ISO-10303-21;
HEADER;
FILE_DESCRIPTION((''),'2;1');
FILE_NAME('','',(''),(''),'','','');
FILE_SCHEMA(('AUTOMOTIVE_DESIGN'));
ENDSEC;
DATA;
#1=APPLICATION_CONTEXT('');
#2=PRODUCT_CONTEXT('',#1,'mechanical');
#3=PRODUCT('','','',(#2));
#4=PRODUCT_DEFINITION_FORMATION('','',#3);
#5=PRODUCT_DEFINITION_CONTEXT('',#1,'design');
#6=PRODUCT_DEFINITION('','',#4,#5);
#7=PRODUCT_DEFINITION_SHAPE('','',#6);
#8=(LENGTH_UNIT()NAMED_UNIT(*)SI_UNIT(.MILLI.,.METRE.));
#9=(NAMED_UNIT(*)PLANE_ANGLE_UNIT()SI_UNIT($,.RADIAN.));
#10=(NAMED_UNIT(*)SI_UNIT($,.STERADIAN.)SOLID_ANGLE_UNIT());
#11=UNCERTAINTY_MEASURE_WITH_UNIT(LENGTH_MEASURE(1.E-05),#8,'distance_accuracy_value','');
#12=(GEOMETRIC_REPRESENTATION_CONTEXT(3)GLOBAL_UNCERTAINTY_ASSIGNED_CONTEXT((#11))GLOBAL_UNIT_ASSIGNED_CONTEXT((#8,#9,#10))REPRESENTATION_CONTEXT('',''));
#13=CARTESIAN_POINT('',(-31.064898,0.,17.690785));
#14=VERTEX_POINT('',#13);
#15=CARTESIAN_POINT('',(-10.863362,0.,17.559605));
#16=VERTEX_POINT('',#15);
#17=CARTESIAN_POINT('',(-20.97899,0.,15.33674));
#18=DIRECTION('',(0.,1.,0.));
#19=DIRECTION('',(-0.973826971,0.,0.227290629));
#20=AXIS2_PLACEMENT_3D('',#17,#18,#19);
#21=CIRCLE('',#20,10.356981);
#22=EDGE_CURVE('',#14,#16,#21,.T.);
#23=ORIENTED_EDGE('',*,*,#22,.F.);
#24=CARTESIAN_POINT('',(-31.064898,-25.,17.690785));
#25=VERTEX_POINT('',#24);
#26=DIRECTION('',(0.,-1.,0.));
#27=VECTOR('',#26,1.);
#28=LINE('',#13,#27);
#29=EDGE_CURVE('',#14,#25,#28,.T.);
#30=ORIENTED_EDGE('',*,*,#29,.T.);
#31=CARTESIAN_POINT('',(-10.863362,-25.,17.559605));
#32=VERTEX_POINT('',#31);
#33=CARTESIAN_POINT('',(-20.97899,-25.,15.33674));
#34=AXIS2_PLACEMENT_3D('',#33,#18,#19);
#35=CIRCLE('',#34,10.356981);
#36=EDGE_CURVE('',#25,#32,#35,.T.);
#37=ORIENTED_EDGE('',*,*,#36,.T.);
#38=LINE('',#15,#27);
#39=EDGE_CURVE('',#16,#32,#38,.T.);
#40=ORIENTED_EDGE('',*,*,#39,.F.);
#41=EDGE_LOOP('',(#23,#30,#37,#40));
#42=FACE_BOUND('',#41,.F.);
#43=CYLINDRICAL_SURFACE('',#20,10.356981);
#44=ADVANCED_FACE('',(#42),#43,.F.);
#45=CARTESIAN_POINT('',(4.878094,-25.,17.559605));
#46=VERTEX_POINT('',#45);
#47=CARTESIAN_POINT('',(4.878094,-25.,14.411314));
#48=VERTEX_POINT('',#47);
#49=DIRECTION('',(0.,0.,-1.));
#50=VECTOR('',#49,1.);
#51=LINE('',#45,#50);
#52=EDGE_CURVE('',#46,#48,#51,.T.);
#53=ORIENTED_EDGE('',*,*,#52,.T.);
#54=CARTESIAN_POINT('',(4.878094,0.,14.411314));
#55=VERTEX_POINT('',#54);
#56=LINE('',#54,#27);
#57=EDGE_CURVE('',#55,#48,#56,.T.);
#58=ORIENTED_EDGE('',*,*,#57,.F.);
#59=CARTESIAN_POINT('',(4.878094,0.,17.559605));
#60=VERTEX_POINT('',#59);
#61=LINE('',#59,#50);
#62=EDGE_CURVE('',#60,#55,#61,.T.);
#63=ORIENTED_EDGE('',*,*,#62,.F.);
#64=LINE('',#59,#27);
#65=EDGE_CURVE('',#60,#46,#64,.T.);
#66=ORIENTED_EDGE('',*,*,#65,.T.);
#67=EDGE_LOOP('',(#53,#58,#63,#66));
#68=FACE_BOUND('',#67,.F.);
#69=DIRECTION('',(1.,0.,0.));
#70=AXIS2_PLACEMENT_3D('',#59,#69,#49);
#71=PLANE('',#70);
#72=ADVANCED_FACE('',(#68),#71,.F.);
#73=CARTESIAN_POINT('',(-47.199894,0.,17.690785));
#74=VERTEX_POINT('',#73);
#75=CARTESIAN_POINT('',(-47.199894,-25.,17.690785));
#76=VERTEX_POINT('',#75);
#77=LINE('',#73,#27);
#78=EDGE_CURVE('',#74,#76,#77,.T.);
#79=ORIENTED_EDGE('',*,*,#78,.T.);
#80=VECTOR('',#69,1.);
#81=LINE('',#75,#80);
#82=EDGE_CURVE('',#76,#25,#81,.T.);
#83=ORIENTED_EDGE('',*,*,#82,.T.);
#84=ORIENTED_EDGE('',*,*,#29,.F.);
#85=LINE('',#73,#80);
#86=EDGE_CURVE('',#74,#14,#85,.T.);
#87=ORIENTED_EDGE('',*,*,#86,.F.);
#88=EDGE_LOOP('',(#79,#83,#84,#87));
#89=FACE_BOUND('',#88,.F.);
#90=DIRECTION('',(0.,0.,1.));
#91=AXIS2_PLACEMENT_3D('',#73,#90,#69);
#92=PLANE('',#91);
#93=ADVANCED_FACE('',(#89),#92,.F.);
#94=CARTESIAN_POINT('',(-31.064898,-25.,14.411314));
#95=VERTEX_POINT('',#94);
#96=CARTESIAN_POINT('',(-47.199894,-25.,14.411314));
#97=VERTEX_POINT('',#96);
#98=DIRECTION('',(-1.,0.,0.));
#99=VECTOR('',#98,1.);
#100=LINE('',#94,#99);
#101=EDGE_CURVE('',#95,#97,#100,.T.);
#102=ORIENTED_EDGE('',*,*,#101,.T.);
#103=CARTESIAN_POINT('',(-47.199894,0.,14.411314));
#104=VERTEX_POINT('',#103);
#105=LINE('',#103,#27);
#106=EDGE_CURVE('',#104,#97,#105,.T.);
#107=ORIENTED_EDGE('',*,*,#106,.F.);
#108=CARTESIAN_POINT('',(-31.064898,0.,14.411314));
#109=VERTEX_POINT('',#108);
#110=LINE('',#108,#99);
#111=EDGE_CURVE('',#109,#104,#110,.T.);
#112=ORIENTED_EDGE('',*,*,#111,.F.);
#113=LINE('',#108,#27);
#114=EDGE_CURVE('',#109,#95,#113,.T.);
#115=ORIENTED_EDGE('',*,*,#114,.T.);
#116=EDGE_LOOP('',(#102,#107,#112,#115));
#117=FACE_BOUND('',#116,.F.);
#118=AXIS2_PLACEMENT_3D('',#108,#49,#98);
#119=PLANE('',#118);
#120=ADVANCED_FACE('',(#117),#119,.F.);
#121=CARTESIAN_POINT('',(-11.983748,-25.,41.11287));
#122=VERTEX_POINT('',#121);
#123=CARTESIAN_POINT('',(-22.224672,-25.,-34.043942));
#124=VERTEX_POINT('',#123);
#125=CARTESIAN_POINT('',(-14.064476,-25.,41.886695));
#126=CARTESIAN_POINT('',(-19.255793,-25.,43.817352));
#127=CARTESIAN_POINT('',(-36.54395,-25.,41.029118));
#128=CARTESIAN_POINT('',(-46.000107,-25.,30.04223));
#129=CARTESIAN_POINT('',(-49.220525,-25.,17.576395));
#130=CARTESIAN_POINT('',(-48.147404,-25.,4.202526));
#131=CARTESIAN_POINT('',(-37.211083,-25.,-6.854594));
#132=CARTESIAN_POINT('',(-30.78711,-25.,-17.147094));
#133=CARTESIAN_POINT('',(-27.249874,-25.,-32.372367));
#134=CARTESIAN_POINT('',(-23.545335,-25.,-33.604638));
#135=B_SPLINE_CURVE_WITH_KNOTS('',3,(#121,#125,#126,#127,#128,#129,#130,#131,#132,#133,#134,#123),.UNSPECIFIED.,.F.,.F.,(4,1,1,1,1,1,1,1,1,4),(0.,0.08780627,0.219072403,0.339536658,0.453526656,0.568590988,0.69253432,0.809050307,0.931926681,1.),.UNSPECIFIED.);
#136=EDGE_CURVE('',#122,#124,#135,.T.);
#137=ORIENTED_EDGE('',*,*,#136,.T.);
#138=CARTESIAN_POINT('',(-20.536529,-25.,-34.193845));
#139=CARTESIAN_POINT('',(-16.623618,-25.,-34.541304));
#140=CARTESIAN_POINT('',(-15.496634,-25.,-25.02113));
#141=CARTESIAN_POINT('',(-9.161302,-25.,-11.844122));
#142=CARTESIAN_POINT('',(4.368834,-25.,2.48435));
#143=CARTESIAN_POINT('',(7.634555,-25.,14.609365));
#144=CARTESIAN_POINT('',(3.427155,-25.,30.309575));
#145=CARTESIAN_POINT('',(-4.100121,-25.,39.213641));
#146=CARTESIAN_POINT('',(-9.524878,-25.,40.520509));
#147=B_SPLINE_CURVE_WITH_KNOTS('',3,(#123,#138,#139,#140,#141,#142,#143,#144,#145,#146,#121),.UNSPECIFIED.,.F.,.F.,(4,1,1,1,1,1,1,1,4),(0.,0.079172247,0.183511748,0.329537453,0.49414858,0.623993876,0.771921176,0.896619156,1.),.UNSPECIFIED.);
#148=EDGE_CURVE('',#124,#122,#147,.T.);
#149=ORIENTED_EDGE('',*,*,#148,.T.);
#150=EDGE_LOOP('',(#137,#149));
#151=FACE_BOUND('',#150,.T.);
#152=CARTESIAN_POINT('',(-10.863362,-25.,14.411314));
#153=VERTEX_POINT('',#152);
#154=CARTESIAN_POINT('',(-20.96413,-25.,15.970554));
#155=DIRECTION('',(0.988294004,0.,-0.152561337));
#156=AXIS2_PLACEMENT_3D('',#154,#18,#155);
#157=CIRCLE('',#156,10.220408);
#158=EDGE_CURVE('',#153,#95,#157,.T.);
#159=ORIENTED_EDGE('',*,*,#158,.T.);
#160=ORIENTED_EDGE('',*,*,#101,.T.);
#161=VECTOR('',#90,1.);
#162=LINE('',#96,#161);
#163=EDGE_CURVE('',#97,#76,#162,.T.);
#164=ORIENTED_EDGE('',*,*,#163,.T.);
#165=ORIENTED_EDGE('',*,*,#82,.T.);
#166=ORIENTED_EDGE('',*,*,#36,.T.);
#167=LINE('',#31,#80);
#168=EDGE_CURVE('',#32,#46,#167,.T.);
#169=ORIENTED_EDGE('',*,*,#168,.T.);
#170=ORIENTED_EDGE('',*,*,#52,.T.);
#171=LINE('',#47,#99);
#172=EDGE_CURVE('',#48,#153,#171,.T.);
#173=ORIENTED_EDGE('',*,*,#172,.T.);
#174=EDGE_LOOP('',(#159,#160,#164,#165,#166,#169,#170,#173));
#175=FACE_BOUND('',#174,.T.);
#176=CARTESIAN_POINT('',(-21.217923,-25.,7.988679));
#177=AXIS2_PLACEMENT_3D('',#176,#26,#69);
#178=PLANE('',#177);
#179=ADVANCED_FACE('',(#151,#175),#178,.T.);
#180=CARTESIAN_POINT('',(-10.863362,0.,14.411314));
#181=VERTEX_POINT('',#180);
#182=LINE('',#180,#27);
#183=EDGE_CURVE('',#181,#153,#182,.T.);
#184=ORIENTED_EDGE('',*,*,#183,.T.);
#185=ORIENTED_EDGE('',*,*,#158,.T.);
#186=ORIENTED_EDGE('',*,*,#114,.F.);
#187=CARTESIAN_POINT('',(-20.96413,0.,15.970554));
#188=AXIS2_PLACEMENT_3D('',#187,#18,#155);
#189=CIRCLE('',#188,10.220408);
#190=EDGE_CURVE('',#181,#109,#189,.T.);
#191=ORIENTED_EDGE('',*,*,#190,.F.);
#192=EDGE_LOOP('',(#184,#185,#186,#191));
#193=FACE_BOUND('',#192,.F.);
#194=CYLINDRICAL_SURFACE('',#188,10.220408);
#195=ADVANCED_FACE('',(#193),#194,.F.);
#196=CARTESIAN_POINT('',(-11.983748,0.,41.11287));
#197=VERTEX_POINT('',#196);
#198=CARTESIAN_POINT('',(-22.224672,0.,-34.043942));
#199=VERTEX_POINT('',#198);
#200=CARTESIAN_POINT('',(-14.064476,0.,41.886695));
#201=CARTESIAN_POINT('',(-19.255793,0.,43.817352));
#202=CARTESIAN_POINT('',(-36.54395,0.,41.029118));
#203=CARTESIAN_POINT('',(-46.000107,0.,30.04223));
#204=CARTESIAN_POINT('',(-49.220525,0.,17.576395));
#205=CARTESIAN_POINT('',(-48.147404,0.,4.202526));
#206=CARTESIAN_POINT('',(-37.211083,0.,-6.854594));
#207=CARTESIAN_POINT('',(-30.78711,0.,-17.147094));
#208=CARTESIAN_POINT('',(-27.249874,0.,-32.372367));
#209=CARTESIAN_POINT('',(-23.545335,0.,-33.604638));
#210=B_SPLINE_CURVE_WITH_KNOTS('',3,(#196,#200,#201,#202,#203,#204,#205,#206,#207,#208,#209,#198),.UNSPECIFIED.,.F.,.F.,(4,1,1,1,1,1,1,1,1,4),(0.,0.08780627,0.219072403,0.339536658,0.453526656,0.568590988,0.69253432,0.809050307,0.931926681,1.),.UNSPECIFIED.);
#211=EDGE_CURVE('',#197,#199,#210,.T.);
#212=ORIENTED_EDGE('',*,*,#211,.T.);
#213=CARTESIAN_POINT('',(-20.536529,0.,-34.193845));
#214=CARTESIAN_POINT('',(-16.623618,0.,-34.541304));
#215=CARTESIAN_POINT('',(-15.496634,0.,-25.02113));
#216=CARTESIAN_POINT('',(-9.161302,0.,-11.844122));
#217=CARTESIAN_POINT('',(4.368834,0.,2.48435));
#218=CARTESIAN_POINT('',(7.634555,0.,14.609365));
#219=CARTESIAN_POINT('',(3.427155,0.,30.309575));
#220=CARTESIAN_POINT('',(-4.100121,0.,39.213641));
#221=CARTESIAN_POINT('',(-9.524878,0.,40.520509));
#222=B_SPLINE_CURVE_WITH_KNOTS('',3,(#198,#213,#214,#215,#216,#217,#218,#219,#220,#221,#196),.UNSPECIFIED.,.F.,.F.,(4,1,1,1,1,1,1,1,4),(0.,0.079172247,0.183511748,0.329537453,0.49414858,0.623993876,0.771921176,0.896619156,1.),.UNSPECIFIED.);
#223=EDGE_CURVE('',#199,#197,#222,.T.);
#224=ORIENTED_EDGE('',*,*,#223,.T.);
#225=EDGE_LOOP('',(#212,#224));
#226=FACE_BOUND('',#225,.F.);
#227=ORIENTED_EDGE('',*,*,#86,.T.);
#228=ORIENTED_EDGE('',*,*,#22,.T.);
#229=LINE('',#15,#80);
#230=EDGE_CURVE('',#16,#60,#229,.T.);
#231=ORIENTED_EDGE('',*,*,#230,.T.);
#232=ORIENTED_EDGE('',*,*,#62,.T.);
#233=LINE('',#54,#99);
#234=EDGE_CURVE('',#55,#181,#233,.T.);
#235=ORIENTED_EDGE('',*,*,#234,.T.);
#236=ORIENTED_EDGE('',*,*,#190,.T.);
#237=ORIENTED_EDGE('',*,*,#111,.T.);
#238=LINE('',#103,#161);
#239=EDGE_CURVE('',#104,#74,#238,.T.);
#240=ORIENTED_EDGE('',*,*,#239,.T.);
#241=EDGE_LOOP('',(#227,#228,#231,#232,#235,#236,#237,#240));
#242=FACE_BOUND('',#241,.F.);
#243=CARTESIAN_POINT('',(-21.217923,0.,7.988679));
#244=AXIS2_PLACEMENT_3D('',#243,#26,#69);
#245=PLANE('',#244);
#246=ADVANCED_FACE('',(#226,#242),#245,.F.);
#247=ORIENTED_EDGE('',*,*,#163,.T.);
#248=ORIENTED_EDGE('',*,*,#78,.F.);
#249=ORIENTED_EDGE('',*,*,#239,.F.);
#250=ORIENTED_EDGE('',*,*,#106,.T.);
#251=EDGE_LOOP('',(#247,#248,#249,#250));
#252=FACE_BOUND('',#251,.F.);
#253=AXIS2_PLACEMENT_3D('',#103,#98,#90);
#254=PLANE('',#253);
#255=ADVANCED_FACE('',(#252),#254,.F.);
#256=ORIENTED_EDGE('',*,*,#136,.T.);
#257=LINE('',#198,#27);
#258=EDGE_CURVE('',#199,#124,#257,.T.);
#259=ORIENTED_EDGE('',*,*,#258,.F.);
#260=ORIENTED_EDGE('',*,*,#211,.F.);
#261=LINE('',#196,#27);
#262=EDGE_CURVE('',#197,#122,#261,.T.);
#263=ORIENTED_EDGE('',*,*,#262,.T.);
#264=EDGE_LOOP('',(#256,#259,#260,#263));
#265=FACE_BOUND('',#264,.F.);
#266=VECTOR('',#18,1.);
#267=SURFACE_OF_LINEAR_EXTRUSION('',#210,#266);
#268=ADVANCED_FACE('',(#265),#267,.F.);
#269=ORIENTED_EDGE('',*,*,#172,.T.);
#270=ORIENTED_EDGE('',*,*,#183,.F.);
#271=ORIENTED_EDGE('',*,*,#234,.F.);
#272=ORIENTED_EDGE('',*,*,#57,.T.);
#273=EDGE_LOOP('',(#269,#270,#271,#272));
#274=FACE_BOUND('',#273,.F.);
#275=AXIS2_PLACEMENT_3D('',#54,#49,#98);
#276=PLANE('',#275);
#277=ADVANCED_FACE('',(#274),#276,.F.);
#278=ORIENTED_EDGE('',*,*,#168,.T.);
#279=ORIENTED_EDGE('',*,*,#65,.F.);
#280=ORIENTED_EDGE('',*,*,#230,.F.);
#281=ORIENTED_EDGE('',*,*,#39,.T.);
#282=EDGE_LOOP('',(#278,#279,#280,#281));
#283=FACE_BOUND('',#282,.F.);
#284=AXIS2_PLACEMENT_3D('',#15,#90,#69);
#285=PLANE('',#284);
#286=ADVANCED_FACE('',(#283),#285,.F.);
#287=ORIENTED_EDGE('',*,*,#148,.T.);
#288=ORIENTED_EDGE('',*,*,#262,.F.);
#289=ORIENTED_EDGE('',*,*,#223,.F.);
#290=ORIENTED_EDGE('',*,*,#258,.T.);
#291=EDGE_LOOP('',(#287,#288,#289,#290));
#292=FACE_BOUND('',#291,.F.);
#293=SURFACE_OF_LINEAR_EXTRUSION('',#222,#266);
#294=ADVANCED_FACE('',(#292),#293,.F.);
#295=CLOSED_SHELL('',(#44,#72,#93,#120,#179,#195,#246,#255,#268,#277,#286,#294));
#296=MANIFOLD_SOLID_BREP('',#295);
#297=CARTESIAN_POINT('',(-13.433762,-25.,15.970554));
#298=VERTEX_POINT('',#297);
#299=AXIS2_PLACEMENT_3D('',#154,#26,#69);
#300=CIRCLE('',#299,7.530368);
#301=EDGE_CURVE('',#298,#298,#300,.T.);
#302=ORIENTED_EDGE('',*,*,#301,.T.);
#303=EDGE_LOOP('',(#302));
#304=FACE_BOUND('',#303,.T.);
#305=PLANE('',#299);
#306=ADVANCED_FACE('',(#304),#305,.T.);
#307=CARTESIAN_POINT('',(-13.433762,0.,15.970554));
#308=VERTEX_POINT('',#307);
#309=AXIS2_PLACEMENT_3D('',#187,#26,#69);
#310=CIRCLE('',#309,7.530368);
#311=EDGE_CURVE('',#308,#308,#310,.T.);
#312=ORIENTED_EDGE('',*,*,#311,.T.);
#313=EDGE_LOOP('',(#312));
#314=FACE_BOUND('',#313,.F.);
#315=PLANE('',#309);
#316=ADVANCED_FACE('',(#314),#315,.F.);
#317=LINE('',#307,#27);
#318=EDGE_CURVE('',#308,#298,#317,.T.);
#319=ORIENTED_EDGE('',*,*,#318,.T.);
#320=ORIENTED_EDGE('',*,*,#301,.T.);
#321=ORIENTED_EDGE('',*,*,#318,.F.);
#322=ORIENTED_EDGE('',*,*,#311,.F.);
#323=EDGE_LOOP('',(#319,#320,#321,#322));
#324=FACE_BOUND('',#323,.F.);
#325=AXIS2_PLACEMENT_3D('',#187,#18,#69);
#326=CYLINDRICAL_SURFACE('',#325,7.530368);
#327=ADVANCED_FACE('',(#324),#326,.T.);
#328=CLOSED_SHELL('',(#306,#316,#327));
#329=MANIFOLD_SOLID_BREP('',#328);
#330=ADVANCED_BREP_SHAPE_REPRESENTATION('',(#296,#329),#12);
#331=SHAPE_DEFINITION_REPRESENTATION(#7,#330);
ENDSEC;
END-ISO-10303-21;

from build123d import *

# Parameters (mm, degrees)
F1_DEPTH = 25
F0_R     = 7.5303682966


with BuildPart() as f1:
    # F0 (on Front) → F1 (new body)
    with BuildSketch(Plane.XZ):
        with BuildLine():
            add(Edge.make_bspline(
                [(-11.9837475941, 41.112869978), (-14.0644761705, 41.886695284), (-19.2557934458, 43.8173520381), (-36.54394953, 41.0291184883), (-46.0001070067, 30.0422302578), (-49.2205246293, 17.5763953256), (-48.1474036096, 4.2025256185), (-37.2110825678, -6.8545940824), (-30.7871102029, -17.1470942803), (-27.2498735968, -32.3723669291), (-23.5453352756, -33.604638441), (-22.2246721387, -34.0439416468)],
                knots=[0, 0, 0, 0, 0.0878062704, 0.2190724025, 0.3395366578, 0.4535266556, 0.5685909876, 0.6925343203, 0.8090503071, 0.9319266806, 1, 1, 1, 1], degree=3))
            add(Edge.make_bspline(
                [(-22.2246721387, -34.0439416468), (-20.536529393, -34.1938452236), (-16.6236175005, -34.5413036894), (-15.4966338341, -25.0211298075), (-9.1613017918, -11.8441221828), (4.3688343274, 2.4843501308), (7.6345553851, 14.6093654307), (3.4271549286, 30.3095753231), (-4.1001211686, 39.2136412169), (-9.5248784444, 40.520508702), (-11.9837475941, 41.112869978)],
                knots=[0, 0, 0, 0, 0.0791722469, 0.1835117482, 0.329537453, 0.4941485798, 0.6239938761, 0.7719211757, 0.8966191561, 1, 1, 1, 1], degree=3))
        make_face()
        with BuildLine():
            Line((-31.0648977757, 14.4113143906), (-47.1998937428, 14.4113143906))
            Line((-47.1998937428, 14.4113143906), (-47.1998937428, 17.6907852292))
            Line((-47.1998937428, 17.6907852292), (-31.0648977757, 17.6907852292))
            ThreePointArc((-31.0648977757, 17.6907852292), (-20.9117375341, 25.6935033247), (-10.8633618802, 17.5596047193))
            Line((-10.8633618802, 17.5596047193), (4.8780944198, 17.5596047193))
            Line((4.8780944198, 17.5596047193), (4.8780944198, 14.4113143906))
            Line((4.8780944198, 14.4113143906), (-10.8633618802, 14.4113143906))
            ThreePointArc((-10.8633618802, 14.4113143906), (-20.9641298279, 5.7501454983), (-31.0648977757, 14.4113143906))
        make_face(mode=Mode.SUBTRACT)
    extrude(amount=F1_DEPTH)


with BuildPart() as f1b:
    # F0 (on Front) → F1, piece 2 (new body)
    with BuildSketch(Plane.XZ):
        with Locations((-20.9641298279, 15.9705535008)):
            Circle(F0_R)
    extrude(amount=F1_DEPTH)


solid = Compound([f1.part, f1b.part])
